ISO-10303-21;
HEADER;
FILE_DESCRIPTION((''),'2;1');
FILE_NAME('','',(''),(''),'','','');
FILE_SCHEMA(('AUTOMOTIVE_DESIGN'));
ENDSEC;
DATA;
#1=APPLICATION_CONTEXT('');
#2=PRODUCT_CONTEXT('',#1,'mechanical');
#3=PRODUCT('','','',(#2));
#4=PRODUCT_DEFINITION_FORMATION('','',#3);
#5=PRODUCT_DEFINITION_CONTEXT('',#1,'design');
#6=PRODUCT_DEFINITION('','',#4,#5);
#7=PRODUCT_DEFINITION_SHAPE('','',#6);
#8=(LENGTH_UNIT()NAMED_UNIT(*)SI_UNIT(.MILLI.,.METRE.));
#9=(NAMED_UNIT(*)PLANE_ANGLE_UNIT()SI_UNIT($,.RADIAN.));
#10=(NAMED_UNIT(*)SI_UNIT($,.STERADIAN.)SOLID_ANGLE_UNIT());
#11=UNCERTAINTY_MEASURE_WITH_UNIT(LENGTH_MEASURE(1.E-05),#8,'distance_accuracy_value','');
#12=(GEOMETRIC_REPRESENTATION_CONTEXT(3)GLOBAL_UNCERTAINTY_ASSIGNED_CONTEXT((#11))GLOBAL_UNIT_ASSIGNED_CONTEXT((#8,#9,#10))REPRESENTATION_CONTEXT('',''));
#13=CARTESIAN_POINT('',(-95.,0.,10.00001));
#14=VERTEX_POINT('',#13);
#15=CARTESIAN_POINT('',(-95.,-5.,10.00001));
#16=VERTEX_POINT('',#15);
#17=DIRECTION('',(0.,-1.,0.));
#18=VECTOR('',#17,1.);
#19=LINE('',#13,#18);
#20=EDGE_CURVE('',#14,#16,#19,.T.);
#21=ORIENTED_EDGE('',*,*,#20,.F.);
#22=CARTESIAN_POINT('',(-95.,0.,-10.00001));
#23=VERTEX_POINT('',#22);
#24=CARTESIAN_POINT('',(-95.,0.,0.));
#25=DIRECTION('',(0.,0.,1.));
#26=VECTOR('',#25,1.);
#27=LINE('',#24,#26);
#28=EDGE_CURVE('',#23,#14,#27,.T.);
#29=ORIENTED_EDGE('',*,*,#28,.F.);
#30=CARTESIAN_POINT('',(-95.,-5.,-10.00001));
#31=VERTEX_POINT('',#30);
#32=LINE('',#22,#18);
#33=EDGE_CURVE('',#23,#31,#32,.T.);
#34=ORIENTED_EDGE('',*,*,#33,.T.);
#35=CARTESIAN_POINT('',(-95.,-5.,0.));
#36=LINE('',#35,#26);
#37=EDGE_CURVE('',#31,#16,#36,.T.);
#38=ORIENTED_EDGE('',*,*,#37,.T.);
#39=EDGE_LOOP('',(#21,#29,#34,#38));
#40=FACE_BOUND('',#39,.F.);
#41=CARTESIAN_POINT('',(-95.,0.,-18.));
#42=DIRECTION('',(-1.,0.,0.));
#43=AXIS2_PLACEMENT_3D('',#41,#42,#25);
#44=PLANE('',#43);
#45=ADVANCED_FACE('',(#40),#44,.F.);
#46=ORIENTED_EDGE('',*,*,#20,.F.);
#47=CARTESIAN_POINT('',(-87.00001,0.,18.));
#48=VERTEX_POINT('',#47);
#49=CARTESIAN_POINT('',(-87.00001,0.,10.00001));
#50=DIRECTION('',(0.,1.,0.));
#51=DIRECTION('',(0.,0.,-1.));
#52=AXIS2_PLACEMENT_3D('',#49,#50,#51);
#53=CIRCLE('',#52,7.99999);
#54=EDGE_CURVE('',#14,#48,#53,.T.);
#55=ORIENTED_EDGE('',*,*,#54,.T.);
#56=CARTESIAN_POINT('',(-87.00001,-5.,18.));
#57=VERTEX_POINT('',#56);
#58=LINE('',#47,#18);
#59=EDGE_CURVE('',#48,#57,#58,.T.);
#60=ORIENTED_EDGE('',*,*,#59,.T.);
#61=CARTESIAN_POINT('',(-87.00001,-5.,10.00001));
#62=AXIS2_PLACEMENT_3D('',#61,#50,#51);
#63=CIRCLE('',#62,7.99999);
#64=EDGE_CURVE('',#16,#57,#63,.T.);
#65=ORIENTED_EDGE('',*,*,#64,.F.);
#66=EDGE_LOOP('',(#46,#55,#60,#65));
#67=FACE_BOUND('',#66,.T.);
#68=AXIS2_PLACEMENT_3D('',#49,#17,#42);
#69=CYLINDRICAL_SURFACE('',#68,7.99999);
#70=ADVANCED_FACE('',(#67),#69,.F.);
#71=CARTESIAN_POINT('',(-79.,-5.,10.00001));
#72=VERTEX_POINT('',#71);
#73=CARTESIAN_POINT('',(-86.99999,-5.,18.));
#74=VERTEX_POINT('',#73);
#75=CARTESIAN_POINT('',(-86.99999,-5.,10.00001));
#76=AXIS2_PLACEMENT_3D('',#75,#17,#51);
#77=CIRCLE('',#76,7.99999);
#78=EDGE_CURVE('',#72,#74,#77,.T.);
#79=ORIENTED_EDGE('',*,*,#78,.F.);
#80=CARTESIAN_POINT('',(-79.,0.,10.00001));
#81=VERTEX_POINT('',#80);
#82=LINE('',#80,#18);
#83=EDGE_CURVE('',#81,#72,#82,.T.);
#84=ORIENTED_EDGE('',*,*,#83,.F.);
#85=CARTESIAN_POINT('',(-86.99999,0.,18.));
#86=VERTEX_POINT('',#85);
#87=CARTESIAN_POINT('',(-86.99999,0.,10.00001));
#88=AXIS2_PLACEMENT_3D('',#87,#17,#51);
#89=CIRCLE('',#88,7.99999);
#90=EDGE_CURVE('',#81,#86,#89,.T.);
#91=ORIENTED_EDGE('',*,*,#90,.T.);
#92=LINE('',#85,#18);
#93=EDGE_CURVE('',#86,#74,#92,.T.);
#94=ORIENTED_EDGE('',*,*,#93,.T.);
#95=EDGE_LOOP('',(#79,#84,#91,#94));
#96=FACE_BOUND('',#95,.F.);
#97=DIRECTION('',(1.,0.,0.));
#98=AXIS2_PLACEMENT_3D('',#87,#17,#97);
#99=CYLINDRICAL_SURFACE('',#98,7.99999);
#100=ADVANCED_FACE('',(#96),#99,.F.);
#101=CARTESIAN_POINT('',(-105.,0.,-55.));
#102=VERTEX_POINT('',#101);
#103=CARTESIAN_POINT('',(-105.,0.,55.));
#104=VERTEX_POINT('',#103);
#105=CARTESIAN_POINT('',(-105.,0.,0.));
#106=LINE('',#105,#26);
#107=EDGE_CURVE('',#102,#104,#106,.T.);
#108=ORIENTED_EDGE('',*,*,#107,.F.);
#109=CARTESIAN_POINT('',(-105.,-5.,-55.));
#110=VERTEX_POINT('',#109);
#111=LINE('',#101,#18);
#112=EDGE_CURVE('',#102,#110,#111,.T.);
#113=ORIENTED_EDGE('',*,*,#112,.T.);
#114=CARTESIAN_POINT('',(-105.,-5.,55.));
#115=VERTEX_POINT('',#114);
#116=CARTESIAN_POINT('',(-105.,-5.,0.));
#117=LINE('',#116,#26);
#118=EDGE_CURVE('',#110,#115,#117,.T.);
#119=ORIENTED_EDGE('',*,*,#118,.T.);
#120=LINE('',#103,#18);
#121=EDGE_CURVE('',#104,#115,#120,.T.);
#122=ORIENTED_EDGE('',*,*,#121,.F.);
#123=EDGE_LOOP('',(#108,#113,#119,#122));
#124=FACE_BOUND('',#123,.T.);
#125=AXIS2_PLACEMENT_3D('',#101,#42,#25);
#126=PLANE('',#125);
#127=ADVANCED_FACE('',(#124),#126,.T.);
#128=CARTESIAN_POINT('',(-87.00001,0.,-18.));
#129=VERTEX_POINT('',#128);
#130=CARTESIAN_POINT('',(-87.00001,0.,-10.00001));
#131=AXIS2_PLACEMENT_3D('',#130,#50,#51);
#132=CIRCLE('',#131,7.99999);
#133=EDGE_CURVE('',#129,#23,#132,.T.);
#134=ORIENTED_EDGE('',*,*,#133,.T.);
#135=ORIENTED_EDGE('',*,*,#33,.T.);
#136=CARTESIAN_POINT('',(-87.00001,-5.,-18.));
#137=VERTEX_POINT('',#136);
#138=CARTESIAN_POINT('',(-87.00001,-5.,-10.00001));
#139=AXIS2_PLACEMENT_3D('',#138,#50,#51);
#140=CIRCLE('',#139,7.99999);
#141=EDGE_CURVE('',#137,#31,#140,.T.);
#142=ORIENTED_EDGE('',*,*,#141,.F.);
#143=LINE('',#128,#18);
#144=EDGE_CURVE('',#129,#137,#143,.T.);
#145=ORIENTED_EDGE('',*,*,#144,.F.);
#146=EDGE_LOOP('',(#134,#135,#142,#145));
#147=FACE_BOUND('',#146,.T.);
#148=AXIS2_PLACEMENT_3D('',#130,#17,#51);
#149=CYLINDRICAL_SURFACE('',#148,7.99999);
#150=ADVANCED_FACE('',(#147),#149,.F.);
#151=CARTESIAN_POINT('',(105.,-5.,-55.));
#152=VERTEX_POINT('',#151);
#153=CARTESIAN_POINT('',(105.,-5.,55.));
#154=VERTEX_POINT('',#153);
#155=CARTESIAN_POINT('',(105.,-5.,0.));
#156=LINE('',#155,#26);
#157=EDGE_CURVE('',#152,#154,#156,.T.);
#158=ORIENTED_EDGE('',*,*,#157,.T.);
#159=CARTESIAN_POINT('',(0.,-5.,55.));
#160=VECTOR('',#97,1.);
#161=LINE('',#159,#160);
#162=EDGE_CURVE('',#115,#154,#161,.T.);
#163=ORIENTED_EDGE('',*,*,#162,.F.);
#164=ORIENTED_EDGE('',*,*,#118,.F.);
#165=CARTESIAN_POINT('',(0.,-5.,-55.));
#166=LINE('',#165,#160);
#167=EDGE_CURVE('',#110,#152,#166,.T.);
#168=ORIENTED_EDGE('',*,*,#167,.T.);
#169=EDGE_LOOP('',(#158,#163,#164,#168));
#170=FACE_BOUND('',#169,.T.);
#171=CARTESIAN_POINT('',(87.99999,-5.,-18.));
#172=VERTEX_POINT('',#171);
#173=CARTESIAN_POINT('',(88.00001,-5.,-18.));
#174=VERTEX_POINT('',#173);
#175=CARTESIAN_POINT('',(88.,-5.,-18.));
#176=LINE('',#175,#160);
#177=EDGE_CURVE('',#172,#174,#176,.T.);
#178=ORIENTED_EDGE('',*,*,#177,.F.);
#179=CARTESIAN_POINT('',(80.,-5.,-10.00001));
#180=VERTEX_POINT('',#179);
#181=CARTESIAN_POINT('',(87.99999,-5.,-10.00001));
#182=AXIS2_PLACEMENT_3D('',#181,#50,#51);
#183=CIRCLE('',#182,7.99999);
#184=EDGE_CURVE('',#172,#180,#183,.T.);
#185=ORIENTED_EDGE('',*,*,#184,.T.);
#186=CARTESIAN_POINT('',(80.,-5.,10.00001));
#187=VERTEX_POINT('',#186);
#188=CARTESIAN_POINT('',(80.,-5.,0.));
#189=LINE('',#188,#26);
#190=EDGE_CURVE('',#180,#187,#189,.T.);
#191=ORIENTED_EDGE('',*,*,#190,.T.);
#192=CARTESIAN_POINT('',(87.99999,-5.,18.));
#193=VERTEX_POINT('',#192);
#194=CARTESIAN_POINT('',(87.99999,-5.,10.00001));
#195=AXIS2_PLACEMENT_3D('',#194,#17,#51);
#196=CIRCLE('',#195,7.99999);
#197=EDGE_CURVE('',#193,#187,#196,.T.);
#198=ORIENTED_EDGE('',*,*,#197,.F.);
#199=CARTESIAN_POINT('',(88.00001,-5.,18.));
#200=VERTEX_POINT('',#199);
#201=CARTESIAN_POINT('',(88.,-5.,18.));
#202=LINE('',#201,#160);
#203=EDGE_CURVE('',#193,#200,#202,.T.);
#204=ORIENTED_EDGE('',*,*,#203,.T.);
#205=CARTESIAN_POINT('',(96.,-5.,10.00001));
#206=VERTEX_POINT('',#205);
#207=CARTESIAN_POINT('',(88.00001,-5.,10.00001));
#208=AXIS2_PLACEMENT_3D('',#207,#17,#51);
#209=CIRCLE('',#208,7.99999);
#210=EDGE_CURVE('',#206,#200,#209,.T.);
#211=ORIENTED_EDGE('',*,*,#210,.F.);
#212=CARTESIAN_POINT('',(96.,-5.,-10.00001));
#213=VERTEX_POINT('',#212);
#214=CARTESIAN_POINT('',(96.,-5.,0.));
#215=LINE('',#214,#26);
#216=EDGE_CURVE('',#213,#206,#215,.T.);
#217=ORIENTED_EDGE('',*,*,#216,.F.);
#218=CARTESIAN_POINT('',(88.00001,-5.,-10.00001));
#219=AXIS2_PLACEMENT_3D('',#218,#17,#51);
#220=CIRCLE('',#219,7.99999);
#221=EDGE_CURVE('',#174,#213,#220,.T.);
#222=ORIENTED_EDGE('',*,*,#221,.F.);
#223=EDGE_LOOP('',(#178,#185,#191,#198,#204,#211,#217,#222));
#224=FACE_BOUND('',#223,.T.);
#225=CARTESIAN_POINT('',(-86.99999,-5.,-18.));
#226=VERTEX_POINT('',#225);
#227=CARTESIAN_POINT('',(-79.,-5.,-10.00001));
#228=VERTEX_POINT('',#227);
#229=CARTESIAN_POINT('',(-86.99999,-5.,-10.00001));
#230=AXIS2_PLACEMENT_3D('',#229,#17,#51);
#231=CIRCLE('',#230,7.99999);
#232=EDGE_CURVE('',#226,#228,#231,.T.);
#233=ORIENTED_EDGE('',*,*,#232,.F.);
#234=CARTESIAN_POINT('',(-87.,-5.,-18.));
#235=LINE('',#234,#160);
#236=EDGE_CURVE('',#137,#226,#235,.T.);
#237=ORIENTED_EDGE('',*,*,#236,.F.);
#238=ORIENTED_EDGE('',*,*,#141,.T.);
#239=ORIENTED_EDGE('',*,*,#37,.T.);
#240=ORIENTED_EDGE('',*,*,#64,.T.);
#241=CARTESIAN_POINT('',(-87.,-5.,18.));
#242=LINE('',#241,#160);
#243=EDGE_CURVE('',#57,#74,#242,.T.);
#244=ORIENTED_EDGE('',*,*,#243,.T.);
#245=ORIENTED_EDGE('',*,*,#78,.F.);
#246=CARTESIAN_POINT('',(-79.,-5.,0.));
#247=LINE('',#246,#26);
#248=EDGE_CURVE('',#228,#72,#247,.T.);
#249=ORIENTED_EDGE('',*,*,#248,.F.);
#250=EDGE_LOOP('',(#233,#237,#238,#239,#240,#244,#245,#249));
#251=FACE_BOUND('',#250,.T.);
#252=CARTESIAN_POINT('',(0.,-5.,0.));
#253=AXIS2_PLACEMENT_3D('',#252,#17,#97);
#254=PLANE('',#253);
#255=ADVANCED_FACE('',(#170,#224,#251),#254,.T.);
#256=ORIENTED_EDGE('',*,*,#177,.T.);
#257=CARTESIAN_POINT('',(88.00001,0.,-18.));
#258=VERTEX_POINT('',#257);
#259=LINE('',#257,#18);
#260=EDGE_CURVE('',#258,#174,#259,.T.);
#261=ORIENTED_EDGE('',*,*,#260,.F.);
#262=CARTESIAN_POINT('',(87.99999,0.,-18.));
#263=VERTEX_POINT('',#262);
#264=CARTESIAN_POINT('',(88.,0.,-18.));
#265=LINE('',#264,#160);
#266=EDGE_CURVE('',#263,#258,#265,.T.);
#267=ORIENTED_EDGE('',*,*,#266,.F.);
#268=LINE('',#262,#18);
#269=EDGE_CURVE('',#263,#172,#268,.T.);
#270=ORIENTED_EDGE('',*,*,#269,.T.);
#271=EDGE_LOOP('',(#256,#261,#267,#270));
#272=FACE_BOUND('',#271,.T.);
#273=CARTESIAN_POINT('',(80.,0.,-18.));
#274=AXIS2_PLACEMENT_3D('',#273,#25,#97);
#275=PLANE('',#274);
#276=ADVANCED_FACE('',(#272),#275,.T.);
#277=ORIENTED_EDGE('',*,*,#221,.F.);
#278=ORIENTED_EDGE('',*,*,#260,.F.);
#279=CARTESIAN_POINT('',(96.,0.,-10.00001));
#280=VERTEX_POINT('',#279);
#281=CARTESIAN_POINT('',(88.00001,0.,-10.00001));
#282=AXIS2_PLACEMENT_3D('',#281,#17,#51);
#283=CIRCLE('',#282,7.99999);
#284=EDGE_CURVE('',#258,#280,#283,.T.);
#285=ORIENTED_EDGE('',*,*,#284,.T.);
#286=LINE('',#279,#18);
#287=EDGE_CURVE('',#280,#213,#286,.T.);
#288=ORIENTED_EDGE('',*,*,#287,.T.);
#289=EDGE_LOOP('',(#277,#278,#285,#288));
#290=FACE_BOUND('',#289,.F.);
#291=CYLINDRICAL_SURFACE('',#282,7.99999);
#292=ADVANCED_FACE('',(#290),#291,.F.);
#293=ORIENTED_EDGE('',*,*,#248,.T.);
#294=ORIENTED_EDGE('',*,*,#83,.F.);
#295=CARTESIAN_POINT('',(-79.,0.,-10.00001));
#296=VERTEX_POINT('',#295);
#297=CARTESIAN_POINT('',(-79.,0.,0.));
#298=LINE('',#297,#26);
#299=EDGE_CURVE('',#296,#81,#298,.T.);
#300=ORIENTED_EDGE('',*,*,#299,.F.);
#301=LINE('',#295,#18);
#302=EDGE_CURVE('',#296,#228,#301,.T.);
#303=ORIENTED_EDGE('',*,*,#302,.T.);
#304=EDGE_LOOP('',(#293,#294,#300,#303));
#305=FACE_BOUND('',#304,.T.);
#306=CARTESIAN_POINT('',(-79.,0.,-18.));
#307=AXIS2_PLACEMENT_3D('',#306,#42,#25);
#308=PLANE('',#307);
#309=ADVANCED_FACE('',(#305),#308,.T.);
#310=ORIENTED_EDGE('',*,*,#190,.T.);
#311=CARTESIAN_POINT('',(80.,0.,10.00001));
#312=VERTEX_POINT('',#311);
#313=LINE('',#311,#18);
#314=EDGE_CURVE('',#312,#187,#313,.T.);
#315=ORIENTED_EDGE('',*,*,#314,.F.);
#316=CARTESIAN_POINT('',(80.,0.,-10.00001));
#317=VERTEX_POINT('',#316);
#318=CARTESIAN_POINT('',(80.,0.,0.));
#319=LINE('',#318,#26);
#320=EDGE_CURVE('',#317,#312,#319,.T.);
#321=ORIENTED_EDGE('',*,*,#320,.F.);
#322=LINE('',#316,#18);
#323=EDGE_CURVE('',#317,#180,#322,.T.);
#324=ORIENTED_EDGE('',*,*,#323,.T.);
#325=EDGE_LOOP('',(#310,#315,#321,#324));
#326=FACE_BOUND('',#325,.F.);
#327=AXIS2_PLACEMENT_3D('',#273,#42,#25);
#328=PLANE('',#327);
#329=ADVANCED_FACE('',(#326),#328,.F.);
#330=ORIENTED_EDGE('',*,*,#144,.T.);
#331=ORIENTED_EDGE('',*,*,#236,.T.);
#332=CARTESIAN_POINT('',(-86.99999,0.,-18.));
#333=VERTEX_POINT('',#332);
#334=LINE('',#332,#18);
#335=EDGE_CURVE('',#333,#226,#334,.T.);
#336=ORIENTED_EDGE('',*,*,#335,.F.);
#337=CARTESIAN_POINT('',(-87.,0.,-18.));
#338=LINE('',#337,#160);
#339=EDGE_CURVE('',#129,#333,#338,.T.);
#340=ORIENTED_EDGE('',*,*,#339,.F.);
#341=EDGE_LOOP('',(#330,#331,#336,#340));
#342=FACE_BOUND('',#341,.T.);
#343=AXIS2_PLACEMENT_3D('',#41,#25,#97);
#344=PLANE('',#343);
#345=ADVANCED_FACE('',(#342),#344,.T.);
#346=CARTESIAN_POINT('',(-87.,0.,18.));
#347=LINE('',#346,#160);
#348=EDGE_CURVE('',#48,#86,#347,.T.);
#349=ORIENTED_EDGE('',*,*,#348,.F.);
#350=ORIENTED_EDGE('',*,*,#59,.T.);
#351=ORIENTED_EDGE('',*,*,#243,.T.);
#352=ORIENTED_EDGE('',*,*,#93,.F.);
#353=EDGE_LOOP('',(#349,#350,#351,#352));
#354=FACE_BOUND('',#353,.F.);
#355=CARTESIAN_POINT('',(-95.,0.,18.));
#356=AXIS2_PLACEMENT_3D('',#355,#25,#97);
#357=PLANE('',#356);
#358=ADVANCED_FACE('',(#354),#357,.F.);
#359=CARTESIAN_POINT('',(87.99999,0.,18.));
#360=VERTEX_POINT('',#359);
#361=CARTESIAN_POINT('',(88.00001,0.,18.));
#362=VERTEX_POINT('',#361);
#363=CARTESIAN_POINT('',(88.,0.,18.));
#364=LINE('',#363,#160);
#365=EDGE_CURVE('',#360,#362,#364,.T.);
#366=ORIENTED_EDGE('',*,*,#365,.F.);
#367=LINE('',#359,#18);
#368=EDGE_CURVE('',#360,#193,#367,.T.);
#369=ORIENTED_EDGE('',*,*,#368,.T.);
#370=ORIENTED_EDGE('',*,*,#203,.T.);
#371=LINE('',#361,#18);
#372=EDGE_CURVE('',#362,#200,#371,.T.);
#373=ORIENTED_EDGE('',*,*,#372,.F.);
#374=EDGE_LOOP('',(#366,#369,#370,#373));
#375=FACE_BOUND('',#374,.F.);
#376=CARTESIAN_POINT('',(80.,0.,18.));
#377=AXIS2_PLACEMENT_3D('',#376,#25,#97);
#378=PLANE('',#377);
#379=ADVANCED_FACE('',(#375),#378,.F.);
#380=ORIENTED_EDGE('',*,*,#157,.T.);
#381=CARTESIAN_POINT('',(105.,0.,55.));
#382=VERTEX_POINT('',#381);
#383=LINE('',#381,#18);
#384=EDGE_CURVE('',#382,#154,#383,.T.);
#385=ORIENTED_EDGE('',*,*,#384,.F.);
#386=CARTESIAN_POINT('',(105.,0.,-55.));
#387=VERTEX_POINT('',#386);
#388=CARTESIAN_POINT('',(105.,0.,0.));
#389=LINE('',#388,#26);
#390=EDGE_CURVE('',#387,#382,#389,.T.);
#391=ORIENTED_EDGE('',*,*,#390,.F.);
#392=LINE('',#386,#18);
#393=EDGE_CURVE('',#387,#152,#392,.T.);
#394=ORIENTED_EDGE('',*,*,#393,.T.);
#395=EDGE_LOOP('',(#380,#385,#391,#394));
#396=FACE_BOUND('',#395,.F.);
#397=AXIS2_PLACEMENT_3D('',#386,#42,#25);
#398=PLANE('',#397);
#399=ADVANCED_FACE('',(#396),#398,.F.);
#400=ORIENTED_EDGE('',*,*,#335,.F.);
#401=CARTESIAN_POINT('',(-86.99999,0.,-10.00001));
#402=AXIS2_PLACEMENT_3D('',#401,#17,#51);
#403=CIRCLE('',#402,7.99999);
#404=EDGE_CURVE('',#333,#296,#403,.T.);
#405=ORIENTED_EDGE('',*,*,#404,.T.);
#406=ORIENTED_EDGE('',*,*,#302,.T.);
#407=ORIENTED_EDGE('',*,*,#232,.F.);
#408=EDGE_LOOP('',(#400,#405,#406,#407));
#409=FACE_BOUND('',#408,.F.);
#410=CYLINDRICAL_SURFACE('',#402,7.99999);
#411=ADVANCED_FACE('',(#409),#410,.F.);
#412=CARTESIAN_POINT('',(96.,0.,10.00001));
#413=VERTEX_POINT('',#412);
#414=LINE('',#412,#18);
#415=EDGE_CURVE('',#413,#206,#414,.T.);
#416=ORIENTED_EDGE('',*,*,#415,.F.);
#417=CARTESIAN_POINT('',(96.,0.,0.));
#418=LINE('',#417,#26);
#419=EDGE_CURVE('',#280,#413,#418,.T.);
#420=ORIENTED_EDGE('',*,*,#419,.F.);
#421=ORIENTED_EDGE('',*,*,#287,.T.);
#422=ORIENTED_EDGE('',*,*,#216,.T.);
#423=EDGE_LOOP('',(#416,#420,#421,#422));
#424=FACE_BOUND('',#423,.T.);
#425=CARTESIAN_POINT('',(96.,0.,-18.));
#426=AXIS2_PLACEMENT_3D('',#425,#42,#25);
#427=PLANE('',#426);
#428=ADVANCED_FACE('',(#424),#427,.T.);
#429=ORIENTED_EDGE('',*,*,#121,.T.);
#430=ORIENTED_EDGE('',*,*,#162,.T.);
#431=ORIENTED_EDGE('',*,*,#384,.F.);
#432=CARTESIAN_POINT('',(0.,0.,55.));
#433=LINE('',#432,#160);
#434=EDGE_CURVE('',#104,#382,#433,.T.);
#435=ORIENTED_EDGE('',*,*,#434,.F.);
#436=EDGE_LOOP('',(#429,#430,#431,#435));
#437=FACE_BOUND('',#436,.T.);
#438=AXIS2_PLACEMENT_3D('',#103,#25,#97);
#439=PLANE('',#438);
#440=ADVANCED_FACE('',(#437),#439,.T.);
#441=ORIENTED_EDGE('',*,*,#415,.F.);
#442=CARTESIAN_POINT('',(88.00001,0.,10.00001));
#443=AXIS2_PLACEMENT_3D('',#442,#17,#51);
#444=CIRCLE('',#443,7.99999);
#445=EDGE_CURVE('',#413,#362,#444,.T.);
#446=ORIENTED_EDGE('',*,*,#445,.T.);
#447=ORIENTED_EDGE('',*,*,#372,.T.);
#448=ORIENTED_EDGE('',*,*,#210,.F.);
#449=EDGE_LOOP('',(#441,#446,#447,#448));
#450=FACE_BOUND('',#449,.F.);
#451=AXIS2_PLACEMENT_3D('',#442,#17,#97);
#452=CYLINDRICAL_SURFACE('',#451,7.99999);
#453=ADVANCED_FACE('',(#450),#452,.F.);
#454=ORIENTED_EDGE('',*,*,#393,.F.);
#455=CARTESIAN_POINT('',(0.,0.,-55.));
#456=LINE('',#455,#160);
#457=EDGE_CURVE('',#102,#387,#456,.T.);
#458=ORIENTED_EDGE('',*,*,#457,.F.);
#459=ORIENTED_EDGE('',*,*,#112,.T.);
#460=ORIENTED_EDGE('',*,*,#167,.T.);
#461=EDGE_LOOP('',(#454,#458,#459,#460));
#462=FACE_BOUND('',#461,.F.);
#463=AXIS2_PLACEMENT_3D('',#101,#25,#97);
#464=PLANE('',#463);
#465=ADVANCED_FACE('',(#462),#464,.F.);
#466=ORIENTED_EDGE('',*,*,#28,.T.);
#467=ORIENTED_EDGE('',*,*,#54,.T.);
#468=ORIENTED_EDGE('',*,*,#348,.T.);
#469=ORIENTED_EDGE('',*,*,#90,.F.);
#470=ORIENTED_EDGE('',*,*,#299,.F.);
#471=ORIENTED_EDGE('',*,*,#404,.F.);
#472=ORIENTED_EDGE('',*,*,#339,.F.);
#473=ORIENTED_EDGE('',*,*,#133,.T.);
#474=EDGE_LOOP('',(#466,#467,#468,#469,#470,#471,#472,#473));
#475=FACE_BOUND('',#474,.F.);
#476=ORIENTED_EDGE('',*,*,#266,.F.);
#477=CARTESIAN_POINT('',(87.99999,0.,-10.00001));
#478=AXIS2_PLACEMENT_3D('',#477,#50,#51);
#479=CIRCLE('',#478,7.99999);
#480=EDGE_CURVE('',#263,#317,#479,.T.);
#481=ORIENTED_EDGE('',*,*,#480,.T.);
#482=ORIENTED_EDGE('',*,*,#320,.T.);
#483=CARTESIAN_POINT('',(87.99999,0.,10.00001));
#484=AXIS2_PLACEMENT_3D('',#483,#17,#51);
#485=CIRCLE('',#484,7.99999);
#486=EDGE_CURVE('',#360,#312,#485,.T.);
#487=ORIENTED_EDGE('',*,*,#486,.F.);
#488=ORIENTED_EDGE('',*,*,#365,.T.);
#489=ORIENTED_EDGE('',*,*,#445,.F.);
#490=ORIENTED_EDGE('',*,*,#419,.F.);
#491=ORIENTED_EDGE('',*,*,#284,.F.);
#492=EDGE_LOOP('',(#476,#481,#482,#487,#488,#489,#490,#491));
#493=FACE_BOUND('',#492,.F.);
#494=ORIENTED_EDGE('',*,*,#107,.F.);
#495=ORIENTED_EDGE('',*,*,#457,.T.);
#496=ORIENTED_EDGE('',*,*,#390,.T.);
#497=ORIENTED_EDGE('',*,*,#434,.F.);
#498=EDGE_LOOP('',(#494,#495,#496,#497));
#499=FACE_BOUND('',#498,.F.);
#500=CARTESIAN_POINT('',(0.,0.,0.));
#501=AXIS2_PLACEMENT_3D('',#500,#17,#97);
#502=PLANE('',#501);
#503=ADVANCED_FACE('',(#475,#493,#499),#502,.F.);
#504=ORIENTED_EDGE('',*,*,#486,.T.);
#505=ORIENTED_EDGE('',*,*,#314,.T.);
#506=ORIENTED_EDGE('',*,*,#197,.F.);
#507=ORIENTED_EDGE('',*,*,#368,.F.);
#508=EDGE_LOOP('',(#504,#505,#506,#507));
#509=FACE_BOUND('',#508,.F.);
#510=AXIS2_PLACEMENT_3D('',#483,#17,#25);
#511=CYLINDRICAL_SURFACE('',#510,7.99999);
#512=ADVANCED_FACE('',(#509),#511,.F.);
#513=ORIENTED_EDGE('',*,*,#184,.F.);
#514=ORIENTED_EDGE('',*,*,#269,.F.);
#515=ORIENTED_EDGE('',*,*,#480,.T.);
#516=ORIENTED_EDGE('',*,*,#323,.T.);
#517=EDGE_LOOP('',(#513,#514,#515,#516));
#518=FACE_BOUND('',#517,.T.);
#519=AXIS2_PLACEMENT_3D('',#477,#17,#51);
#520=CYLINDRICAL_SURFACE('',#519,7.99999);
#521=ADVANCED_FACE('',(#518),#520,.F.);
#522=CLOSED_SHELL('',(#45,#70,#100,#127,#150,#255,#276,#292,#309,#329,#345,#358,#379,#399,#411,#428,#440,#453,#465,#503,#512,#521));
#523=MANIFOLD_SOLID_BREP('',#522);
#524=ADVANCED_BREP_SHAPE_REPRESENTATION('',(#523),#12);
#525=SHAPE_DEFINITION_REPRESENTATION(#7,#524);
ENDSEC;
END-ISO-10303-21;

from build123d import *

# Parameters (mm, degrees)
F0_W     = 210
F0_H     = 110
F0_W_2   = 16
F0_H_2   = 36
F1_DEPTH = 5
F2_R     = 7.99999


# Not quite as in the source:
# - a fillet or chamfer is up to 0.001 mm smaller than in the source, because OpenCascade refuses the exact size
# - a feature names something its author has since deleted; it is built from what else it names


with BuildPart() as f1:
    # F0 (on Front) → F1 (new body)
    with BuildSketch(Plane.XZ):
        Rectangle(F0_W, F0_H)
        with Locations((-87, 0)):
            Rectangle(F0_W_2, F0_H_2, mode=Mode.SUBTRACT)
        with Locations((88, 0)):
            Rectangle(F0_W_2, F0_H_2, mode=Mode.SUBTRACT)
    extrude(amount=F1_DEPTH)

    # F2 (radius 8 in the source; OpenCascade refuses exactly that, so slightly less here)
    f2_edges = [f1.edges().sort_by_distance(p)[0] for p in [
        (-95, -2.5, 18),
        (-79, -2.5, 18),
        (-95, -2.5, -18),
        (-79, -2.5, -18),
        (80, -2.5, 18),
        (96, -2.5, 18),
        (96, -2.5, -18),
        (80, -2.5, -18),
    ]]
    fillet(f2_edges, radius=F2_R)


solid = f1.part
